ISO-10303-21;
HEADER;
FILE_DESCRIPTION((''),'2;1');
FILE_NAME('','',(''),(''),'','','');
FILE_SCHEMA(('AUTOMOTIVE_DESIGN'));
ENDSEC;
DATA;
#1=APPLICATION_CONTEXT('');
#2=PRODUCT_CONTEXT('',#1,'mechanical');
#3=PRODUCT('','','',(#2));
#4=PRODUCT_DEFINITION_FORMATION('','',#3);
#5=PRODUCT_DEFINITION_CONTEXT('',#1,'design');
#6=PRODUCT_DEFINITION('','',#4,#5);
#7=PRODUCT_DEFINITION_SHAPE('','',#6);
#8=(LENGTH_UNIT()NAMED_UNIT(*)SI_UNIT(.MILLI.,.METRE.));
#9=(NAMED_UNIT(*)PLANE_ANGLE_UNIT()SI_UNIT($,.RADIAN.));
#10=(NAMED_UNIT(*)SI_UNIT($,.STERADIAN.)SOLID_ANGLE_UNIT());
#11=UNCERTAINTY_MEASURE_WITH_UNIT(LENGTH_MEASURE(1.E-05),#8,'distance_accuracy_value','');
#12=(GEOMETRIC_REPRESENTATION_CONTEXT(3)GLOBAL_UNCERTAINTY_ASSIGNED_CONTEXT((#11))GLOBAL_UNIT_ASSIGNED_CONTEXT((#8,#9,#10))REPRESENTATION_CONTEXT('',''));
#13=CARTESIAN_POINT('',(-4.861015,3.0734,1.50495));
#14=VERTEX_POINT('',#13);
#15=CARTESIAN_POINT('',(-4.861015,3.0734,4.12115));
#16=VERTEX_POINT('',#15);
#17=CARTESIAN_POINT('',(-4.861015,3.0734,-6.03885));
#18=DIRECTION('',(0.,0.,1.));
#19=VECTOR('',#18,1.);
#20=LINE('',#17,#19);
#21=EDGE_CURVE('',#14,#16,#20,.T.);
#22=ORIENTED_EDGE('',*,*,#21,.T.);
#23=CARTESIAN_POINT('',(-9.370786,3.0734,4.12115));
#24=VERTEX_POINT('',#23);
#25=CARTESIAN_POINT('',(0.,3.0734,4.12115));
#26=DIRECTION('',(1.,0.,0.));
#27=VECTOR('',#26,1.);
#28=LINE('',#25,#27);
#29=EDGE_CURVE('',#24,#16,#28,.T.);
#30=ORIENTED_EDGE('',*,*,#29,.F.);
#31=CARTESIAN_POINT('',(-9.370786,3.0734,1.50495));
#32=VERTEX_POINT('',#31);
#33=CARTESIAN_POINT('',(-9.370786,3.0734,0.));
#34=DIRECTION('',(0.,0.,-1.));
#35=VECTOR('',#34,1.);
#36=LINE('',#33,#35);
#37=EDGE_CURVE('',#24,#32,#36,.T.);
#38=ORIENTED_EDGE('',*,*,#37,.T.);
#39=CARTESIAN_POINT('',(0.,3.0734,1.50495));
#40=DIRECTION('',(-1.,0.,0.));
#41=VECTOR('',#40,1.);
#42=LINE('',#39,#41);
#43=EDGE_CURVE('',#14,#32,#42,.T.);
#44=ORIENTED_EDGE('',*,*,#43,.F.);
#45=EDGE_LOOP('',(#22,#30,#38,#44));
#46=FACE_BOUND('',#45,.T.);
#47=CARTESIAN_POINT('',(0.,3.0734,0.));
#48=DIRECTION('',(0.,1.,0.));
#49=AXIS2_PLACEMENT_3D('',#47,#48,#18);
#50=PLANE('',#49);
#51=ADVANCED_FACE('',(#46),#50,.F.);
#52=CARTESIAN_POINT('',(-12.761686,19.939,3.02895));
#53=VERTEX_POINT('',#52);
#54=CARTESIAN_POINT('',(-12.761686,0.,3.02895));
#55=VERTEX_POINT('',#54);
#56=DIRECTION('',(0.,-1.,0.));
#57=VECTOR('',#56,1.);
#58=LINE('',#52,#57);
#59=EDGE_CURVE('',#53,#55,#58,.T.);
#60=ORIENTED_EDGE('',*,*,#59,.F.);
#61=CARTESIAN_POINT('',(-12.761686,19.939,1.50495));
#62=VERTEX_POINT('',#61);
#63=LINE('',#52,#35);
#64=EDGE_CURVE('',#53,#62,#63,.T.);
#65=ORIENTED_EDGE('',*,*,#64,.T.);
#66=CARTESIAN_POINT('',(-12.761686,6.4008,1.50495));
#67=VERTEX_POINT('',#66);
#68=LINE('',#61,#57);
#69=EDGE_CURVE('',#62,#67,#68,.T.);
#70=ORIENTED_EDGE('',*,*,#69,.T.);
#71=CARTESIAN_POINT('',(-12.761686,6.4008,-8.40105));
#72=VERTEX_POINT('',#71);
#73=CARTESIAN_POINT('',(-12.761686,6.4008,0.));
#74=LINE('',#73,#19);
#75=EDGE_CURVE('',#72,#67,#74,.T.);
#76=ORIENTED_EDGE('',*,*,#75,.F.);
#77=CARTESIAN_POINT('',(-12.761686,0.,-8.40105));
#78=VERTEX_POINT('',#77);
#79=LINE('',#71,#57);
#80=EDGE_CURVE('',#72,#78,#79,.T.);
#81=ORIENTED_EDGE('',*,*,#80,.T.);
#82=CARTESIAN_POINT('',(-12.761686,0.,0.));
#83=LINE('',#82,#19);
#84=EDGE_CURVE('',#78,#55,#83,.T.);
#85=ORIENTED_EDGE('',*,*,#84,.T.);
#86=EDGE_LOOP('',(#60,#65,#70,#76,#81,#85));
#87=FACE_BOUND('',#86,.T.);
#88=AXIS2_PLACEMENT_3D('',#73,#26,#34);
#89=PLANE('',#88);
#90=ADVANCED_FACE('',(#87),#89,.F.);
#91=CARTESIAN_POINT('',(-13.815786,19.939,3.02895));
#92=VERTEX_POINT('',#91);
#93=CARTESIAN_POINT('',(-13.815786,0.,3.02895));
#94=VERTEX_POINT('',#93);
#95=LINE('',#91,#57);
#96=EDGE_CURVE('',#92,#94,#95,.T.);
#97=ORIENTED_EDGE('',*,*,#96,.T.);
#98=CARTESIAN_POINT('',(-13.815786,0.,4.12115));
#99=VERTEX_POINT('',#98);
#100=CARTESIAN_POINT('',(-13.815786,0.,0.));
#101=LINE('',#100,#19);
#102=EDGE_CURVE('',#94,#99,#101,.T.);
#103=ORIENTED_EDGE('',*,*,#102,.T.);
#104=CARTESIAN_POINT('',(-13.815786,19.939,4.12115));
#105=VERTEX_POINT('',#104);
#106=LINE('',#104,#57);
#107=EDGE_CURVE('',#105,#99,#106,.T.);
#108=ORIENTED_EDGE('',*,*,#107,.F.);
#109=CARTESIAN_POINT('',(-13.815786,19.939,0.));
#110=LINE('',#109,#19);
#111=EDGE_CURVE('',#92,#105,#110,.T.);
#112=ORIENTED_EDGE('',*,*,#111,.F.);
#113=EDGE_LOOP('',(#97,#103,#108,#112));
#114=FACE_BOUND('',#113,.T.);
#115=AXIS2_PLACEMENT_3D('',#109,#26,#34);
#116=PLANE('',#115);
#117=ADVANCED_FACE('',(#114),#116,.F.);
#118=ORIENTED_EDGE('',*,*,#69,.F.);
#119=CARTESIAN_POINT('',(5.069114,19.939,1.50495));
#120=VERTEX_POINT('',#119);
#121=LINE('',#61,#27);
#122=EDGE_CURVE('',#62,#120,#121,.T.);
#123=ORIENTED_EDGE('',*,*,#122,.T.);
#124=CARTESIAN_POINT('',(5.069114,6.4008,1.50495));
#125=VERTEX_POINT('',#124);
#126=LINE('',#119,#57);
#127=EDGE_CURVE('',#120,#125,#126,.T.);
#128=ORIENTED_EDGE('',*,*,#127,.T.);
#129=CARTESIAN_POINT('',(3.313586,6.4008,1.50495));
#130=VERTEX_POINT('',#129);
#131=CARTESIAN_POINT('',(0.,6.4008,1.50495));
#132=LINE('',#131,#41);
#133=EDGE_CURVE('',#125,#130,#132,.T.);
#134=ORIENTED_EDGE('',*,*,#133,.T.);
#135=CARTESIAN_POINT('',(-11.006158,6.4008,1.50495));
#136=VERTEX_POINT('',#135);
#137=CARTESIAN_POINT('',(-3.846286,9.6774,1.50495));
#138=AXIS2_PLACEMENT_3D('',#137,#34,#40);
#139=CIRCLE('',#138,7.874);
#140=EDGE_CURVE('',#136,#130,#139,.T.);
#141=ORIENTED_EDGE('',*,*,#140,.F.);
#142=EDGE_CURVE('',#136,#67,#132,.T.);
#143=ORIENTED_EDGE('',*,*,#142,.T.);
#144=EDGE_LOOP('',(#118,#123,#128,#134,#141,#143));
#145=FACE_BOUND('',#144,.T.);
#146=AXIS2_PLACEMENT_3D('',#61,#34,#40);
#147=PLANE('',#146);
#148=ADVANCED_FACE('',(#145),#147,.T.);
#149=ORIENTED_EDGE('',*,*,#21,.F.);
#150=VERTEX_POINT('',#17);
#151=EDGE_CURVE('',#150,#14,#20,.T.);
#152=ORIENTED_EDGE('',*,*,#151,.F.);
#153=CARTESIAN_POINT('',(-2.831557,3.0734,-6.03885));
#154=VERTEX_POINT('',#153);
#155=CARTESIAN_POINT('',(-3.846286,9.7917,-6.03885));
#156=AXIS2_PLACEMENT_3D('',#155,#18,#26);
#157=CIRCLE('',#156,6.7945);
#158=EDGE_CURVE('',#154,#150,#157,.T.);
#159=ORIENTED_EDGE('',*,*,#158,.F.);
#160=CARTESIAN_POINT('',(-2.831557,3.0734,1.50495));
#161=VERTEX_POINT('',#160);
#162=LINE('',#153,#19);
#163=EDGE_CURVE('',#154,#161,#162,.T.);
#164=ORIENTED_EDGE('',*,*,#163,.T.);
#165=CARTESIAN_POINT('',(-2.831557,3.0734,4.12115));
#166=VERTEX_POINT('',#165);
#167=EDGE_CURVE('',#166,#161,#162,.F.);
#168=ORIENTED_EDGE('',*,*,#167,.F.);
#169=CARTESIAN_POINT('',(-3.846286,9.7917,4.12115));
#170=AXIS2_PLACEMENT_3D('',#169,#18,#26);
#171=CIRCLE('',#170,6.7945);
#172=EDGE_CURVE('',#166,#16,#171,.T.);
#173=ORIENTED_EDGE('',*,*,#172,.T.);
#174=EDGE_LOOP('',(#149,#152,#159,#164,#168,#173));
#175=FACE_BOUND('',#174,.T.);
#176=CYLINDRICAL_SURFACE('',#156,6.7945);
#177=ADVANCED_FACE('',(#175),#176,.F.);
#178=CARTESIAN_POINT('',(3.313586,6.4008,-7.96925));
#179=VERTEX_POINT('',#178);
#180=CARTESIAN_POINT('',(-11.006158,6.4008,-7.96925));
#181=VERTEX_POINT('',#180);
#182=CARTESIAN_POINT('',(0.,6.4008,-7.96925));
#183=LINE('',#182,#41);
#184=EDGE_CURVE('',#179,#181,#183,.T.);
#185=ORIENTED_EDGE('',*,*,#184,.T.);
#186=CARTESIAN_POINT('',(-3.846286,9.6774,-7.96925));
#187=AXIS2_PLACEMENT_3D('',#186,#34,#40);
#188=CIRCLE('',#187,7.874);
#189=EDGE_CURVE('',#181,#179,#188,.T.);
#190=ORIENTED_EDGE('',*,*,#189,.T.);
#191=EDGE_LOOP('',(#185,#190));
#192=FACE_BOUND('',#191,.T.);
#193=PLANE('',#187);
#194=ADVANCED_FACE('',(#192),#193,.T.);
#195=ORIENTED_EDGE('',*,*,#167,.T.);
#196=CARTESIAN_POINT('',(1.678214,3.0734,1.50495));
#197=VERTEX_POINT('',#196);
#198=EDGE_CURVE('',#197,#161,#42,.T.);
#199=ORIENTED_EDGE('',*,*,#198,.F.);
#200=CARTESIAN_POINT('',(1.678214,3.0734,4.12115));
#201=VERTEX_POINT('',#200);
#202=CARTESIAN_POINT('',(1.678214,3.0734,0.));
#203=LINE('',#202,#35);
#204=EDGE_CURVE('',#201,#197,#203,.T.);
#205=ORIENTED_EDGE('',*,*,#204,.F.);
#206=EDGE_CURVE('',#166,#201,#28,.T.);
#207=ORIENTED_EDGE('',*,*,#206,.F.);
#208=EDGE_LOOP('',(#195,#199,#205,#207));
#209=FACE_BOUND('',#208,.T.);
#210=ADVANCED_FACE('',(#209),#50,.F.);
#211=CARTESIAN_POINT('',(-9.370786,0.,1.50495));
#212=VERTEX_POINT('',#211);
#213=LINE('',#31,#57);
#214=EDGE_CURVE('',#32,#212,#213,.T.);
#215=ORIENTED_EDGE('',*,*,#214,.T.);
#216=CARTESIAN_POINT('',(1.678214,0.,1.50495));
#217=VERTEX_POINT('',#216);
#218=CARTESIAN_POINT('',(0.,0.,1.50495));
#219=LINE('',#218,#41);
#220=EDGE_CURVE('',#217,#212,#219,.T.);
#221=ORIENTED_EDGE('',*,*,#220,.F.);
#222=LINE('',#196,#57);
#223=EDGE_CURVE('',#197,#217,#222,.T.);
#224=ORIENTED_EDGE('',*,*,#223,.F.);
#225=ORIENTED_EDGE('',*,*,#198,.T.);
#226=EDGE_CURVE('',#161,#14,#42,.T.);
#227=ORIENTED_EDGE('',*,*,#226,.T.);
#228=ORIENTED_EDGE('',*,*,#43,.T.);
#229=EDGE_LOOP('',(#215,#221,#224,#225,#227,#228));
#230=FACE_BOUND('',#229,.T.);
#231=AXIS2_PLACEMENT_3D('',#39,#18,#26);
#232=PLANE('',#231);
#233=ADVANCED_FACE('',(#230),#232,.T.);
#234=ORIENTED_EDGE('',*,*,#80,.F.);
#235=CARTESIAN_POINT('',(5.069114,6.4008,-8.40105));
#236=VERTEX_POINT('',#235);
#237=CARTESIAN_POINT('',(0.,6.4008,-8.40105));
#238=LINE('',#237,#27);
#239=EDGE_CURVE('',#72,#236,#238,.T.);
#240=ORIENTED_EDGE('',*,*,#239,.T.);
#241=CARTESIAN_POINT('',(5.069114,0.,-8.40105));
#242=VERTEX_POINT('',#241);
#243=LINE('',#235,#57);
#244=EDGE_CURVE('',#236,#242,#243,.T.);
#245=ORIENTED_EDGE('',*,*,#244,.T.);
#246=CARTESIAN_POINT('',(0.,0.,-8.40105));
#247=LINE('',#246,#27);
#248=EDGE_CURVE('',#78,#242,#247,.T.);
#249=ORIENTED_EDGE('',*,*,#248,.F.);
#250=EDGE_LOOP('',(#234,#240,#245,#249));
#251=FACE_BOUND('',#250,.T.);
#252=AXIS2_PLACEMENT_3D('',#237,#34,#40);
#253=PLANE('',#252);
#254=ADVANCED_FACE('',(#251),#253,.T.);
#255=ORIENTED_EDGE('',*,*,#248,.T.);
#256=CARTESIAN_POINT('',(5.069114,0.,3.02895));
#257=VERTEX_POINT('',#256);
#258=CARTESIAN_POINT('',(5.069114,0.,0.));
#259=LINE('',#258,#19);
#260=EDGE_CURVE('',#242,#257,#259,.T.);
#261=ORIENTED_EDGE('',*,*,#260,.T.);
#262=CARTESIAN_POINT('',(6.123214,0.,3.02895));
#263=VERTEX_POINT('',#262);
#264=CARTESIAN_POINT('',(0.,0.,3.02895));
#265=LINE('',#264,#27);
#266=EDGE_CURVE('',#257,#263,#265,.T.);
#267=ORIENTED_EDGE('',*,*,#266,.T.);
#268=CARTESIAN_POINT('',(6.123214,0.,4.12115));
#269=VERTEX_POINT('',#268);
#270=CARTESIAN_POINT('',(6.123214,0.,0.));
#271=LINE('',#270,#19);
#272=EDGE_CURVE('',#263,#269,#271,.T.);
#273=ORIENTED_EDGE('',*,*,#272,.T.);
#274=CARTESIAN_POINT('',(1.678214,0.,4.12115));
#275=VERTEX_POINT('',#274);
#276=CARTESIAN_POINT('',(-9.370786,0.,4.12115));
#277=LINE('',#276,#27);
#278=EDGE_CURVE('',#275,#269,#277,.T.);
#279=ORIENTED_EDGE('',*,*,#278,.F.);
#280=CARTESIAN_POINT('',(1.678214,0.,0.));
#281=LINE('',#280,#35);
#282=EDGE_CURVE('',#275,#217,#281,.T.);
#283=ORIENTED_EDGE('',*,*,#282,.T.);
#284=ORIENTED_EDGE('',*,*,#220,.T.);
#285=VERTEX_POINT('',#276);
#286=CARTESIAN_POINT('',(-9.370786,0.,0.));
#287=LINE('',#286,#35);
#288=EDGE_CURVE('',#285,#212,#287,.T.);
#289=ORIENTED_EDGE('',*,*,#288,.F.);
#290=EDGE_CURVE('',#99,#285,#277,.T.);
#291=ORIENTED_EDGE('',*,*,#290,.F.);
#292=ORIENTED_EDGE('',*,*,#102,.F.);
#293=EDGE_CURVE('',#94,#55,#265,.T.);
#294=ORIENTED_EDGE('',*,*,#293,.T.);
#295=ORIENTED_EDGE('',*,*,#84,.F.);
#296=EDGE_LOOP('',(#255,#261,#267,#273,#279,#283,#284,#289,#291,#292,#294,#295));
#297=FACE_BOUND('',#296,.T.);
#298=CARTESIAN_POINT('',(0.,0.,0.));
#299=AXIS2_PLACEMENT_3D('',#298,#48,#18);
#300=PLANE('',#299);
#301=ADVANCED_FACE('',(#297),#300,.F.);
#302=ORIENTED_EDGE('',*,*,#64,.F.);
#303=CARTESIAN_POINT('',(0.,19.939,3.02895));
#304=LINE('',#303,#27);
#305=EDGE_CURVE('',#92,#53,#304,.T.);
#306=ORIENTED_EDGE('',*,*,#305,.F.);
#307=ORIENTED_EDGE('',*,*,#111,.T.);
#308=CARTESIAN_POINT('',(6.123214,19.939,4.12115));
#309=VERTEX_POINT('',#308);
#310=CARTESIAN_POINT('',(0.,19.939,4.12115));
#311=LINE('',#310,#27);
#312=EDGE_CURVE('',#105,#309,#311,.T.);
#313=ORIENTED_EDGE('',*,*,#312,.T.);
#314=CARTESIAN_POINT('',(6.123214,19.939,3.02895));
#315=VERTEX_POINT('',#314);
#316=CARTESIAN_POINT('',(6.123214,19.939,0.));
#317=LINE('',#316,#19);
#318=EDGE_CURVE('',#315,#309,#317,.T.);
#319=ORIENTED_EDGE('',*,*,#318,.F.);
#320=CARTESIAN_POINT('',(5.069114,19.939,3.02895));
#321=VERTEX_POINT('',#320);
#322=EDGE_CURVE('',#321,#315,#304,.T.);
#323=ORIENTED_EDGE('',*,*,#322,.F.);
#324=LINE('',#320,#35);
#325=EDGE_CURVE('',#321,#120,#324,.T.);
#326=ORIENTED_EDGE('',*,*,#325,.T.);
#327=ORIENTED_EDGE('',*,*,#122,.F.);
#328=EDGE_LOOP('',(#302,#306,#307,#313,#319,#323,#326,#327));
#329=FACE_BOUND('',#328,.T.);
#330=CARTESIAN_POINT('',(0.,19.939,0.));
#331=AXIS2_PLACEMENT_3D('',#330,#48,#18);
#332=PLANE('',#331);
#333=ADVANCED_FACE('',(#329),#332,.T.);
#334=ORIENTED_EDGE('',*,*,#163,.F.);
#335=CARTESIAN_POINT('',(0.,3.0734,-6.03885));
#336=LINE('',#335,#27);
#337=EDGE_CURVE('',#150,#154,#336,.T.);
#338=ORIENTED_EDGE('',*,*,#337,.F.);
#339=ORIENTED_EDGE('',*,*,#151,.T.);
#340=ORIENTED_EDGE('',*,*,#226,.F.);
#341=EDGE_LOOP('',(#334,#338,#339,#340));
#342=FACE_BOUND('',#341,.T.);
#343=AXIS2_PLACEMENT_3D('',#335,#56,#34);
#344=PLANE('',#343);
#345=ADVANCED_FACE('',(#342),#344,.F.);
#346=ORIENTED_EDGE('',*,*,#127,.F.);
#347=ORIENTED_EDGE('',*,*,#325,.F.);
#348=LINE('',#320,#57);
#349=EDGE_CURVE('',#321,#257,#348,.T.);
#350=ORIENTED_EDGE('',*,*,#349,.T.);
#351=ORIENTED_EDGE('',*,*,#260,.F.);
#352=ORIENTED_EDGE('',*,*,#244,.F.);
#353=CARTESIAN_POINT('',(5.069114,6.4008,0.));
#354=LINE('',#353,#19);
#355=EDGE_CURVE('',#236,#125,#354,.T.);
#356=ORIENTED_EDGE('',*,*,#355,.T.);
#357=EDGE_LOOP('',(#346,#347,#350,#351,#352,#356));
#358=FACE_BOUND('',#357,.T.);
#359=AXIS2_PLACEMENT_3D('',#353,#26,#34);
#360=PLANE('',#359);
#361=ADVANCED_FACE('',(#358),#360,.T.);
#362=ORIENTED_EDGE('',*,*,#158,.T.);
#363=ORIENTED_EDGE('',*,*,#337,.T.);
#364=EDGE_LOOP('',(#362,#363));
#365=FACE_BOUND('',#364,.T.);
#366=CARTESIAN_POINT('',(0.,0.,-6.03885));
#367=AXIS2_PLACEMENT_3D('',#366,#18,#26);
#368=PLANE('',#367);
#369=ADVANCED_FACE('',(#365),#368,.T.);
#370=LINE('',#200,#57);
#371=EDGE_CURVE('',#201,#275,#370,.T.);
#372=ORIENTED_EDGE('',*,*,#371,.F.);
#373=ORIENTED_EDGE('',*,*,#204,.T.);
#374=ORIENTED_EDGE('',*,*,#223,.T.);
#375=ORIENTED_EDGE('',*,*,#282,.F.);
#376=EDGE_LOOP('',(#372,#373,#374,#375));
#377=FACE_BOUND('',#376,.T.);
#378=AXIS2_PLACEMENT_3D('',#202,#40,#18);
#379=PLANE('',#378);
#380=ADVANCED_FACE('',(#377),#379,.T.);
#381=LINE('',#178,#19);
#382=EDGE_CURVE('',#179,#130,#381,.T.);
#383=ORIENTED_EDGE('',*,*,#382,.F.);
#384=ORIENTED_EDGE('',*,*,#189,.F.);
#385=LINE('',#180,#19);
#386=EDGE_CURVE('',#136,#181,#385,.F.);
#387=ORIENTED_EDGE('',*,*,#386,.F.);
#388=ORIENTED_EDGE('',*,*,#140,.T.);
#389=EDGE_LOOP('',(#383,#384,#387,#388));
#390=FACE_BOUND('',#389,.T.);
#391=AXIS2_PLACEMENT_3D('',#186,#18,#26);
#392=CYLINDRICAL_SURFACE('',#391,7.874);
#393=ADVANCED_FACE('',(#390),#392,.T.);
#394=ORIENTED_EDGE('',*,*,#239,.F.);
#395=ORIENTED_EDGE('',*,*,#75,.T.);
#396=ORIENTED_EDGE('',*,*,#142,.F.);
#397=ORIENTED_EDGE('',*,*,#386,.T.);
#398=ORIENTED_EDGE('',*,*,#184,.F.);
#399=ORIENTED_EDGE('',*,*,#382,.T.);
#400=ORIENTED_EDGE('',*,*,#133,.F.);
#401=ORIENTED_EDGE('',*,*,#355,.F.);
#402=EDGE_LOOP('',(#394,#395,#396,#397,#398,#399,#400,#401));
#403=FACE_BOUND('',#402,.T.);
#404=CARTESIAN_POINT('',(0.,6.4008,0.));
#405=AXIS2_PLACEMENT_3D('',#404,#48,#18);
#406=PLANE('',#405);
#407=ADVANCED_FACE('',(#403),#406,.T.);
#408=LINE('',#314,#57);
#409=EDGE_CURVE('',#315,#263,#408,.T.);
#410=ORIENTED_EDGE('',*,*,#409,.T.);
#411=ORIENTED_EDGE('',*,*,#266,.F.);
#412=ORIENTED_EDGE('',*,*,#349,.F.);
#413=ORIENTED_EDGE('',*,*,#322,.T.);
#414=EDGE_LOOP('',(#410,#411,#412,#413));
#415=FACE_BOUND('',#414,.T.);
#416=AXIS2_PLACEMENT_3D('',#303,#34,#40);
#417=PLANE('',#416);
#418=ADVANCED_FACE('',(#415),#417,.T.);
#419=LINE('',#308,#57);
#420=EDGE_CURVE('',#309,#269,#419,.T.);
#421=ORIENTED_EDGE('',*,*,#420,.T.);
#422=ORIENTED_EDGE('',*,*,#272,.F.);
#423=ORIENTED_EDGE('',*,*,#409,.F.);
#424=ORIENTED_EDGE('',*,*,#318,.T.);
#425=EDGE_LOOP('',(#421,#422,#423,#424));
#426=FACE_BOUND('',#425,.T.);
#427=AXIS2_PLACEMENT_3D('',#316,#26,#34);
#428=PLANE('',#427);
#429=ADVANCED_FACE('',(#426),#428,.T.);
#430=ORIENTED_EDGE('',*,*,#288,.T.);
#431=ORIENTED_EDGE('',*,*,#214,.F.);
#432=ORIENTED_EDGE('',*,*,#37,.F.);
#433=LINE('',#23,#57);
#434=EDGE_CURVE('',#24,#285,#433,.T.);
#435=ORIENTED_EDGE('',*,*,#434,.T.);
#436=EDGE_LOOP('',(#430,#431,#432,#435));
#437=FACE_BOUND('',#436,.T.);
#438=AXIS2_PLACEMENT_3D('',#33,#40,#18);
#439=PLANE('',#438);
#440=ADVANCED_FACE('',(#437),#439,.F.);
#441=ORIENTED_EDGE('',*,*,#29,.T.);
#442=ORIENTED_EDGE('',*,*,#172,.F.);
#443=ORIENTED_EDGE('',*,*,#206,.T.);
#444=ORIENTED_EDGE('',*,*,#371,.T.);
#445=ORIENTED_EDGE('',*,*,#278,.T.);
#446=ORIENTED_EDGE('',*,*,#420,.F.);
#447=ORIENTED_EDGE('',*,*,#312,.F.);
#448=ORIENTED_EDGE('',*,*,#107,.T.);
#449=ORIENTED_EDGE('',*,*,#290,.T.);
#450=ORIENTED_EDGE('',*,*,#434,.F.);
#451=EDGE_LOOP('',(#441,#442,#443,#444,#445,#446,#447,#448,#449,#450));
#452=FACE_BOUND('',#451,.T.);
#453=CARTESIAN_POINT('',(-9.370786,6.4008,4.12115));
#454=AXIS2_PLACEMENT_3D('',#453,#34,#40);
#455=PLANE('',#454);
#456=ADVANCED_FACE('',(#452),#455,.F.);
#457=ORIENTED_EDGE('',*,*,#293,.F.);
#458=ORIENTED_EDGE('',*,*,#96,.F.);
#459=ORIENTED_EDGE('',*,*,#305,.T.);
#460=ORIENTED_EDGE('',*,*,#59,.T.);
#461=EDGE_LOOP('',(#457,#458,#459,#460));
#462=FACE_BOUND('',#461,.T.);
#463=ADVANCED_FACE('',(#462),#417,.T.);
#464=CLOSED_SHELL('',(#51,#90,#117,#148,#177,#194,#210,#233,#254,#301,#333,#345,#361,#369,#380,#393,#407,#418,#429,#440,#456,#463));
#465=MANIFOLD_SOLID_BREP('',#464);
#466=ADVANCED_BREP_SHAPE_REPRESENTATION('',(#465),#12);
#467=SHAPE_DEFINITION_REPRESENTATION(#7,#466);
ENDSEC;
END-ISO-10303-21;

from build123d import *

# Parameters (mm, degrees)
BOSS_EXTRUDE1_DEPTH = 6.4008
BOSS_EXTRUDE2_DEPTH = 19.939
SKETCH1_4_W         = 11.049
SKETCH1_4_H         = 2.6162
CUT_EXTRUDE1_DEPTH  = 3.0734
SKETCH2_R           = 7.874
BOSS_EXTRUDE3_DEPTH = 9.4742
CUT_EXTRUDE2_DEPTH  = 10.16


with BuildPart() as part:
    # Sketch1 → Boss-Extrude1 (new body)
    with BuildSketch(Plane(origin=(0, 0, 0), x_dir=(1, 0, 0), z_dir=(0, 1, 0))):
        Polygon((1.678214286, -1.50495), (5.069114286, -1.50495), (5.069114286, 8.40105), (-12.761685714, 8.40105), (-12.761685714, -1.50495), (-9.370785714, -1.50495), (-9.370785714, -4.12115), (1.678214286, -4.12115), align=None)
    extrude(amount=BOSS_EXTRUDE1_DEPTH)

    # Sketch1<3> → Boss-Extrude2 (add)
    with BuildSketch(Plane(origin=(0, 0, 0), x_dir=(1, 0, 0), z_dir=(0, 1, 0))):
        Polygon((5.069114286, -3.02895), (5.069114286, -1.50495), (-12.761685714, -1.50495), (-12.761685714, -3.02895), (-13.815785714, -3.02895), (-13.815785714, -4.12115), (6.123214286, -4.12115), (6.123214286, -3.02895), align=None)
    extrude(amount=BOSS_EXTRUDE2_DEPTH)

    # Sketch1<4> → Cut-Extrude1 (cut)
    with BuildSketch(Plane(origin=(0, 0, 0), x_dir=(1, 0, 0), z_dir=(0, 1, 0))):
        with Locations((-3.846285714, -2.81305)):
            Rectangle(SKETCH1_4_W, SKETCH1_4_H)
    extrude(amount=CUT_EXTRUDE1_DEPTH, mode=Mode.SUBTRACT)

    # Sketch2 → Boss-Extrude3 (add)
    with BuildSketch(Plane(origin=(0, 0, 1.50495), x_dir=(-1, 0, 0), z_dir=(0, 0, -1))):
        with Locations((3.846285714, 9.6774)):
            Circle(SKETCH2_R)
    extrude(amount=BOSS_EXTRUDE3_DEPTH)

    # Sketch3 → Cut-Extrude2 (cut)
    with BuildSketch(Plane.XY.offset(4.12115)):
        with BuildLine():
            ThreePointArc((-2.831556509, 3.0734), (1.304433063, 5.360523369), (2.948214286, 9.7917))
            ThreePointArc((2.948214286, 9.7917), (0.95815131, 14.596137025), (-3.846285714, 16.5862))
            ThreePointArc((-3.846285714, 16.5862), (-10.621708934, 10.300493131), (-4.86101492, 3.0734))
            Line((-4.86101492, 3.0734), (-2.831556509, 3.0734))
        make_face()
    extrude(amount=-CUT_EXTRUDE2_DEPTH, mode=Mode.SUBTRACT)


solid = part.part
